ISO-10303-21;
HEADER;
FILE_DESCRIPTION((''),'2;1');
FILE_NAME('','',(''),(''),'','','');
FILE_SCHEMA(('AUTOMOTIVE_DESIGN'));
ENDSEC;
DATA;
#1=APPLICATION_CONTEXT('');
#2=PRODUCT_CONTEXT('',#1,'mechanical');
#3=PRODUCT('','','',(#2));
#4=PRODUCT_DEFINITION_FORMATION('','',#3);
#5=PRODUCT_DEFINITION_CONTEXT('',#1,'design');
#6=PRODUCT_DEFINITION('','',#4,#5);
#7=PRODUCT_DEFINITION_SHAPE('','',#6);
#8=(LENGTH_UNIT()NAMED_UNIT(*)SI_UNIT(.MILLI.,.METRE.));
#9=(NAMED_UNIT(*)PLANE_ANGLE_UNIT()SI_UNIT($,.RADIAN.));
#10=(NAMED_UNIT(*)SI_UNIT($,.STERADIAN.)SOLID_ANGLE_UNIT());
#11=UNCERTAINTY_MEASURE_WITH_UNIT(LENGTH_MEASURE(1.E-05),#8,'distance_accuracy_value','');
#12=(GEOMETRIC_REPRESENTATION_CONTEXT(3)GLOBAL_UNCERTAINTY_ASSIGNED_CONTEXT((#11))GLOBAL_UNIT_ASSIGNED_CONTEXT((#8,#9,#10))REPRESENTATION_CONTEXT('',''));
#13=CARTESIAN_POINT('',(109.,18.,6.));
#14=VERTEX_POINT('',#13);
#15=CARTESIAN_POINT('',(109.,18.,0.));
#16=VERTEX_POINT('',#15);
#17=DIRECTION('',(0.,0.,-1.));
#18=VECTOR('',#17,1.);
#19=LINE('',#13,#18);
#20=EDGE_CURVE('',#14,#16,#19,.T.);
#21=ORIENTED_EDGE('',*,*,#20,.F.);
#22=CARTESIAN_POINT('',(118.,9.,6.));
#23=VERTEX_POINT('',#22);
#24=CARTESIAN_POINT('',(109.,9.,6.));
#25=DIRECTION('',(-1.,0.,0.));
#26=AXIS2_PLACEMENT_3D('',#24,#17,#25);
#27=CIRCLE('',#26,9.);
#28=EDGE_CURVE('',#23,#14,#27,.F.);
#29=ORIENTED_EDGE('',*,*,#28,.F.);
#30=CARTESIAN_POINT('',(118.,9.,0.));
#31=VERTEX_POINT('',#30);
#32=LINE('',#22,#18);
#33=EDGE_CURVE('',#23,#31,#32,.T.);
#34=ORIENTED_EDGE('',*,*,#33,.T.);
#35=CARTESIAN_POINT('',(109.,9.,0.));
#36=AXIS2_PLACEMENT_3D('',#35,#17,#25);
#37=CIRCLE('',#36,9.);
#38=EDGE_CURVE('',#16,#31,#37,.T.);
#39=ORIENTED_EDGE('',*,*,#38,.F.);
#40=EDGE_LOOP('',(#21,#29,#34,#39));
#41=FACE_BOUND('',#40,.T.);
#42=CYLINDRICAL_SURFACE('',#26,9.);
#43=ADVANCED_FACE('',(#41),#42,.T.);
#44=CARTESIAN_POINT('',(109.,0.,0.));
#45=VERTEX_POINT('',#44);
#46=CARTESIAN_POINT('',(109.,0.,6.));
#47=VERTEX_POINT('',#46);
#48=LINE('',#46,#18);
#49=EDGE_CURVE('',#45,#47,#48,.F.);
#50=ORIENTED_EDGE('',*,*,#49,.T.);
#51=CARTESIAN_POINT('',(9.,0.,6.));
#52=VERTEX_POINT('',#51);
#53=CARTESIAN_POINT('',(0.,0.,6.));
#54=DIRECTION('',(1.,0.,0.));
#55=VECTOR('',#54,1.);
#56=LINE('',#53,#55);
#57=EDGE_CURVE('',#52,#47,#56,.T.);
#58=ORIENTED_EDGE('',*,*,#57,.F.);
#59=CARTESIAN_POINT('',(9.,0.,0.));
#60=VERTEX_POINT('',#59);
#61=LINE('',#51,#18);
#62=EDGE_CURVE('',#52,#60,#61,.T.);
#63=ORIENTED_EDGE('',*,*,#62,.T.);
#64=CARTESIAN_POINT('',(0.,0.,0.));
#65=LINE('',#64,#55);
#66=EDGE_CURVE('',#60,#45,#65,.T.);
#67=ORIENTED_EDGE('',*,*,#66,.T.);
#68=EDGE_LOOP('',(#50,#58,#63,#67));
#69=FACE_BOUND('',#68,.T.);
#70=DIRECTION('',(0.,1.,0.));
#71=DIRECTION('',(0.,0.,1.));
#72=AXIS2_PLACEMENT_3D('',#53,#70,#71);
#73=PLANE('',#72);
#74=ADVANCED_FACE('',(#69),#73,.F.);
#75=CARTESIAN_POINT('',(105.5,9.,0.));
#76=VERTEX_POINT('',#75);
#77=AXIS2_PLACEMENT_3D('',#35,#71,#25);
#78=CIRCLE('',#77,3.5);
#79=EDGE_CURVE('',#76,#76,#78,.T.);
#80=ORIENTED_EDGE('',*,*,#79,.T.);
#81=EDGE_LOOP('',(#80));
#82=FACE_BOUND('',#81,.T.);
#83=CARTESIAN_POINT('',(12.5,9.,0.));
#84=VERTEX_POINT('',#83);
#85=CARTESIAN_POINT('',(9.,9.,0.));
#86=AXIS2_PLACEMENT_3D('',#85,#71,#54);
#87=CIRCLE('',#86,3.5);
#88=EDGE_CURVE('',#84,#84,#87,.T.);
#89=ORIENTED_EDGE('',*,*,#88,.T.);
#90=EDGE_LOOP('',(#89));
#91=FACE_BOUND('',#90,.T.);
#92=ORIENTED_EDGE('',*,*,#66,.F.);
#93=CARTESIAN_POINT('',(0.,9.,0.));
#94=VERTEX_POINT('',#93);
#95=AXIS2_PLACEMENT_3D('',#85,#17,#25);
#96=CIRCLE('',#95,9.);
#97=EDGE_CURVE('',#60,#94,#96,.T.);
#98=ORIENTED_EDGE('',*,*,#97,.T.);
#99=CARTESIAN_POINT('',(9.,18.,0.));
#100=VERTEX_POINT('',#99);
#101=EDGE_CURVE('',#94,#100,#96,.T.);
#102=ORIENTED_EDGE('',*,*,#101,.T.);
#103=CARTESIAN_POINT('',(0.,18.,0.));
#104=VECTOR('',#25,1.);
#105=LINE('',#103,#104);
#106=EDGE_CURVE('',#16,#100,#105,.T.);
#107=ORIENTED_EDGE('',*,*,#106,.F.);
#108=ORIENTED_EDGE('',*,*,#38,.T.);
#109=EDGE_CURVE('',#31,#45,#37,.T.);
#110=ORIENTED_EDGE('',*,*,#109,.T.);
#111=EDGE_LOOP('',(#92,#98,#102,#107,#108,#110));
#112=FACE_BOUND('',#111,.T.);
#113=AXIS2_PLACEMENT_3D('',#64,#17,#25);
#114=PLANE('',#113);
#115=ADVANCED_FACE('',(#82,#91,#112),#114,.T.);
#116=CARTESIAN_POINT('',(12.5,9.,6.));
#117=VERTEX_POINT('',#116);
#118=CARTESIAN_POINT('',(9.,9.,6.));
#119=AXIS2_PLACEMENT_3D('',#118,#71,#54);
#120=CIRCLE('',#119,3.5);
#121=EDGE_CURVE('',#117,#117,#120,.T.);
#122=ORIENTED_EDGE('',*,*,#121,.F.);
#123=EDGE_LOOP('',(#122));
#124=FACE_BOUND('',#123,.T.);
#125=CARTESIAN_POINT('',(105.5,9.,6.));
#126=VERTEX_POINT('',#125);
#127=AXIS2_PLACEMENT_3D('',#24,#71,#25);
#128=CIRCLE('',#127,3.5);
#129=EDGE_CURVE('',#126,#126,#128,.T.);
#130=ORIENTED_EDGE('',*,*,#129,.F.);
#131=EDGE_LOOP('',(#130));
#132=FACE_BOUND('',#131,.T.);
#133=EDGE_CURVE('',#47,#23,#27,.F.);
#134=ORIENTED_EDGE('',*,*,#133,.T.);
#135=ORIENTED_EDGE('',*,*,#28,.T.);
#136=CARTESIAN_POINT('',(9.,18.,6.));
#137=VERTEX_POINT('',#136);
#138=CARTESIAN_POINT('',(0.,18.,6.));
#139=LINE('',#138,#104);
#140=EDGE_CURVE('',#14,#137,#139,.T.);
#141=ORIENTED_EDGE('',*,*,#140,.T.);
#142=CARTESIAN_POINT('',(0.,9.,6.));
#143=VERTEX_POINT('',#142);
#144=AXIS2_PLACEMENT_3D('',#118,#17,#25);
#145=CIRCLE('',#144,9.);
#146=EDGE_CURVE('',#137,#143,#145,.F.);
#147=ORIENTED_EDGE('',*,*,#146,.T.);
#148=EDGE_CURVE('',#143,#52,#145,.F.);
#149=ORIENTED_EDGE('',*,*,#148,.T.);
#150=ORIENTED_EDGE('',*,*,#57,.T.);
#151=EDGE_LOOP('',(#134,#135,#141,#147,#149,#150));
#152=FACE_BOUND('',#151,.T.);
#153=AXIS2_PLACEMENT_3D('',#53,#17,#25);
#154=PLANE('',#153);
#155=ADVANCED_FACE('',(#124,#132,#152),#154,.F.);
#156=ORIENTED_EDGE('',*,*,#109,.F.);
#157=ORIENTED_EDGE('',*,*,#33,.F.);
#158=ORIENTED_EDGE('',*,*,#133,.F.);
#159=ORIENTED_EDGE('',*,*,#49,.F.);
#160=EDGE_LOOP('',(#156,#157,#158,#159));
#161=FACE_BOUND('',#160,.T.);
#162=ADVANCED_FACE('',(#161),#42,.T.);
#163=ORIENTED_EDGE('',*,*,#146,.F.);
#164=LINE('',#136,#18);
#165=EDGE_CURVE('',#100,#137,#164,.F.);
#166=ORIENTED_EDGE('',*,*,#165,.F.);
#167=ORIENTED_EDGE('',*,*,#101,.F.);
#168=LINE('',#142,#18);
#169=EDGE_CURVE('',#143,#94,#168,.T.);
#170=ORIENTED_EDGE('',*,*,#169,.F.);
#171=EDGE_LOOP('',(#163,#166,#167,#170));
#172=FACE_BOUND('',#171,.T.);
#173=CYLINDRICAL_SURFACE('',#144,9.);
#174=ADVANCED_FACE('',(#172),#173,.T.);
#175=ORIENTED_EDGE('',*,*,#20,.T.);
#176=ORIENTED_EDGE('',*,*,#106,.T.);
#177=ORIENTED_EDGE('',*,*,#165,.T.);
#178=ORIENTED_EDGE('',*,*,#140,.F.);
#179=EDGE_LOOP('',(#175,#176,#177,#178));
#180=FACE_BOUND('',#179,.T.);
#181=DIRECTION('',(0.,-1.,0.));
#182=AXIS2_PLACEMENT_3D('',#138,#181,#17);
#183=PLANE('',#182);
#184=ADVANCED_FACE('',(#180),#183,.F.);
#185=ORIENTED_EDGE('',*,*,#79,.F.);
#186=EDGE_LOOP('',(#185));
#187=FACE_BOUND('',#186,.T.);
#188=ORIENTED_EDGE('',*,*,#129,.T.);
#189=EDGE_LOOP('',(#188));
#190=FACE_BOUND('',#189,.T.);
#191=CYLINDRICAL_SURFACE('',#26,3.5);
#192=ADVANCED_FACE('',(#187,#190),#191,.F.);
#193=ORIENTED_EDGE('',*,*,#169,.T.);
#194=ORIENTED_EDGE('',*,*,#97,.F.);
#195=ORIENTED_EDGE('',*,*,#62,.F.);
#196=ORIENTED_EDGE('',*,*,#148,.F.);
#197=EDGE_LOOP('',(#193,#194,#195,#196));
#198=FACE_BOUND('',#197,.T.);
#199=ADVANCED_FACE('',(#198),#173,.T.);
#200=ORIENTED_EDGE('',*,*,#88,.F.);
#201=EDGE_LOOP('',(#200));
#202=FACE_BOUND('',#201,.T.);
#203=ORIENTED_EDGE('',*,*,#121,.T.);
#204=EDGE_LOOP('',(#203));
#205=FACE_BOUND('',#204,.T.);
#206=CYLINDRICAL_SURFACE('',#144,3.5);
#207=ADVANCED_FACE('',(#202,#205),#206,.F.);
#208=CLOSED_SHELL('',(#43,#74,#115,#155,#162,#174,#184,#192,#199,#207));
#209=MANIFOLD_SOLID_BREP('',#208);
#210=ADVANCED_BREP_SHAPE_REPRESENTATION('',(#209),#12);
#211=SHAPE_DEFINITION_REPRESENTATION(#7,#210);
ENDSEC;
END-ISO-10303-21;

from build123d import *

# Parameters (mm, degrees)
ESQUISSE1_W        = 118
ESQUISSE1_H        = 18
ESQUISSE1_R        = 3.5
BOSS_EXTRU_1_DEPTH = 6
CONG_1_R           = 9


with BuildPart() as part:
    # Esquisse1 → Boss.-Extru.1 (new body)
    with BuildSketch(Plane.XY):
        with Locations((59, 9)):
            Rectangle(ESQUISSE1_W, ESQUISSE1_H)
        with Locations((9, 9)):
            Circle(ESQUISSE1_R, mode=Mode.SUBTRACT)
        with Locations(Location((109, 9, 0), (0, 0, 180))):
            Circle(ESQUISSE1_R, mode=Mode.SUBTRACT)
    extrude(amount=BOSS_EXTRU_1_DEPTH)

    # Congé1
    cong_1_edges = [part.edges().sort_by_distance(p)[0] for p in [
        (118, 18, 3),
        (118, 0, 3),
        (0, 0, 3),
        (0, 18, 3),
    ]]
    fillet(cong_1_edges, radius=CONG_1_R - 0.0001)  # a hair under: the kernel refuses the full size


solid = part.part
